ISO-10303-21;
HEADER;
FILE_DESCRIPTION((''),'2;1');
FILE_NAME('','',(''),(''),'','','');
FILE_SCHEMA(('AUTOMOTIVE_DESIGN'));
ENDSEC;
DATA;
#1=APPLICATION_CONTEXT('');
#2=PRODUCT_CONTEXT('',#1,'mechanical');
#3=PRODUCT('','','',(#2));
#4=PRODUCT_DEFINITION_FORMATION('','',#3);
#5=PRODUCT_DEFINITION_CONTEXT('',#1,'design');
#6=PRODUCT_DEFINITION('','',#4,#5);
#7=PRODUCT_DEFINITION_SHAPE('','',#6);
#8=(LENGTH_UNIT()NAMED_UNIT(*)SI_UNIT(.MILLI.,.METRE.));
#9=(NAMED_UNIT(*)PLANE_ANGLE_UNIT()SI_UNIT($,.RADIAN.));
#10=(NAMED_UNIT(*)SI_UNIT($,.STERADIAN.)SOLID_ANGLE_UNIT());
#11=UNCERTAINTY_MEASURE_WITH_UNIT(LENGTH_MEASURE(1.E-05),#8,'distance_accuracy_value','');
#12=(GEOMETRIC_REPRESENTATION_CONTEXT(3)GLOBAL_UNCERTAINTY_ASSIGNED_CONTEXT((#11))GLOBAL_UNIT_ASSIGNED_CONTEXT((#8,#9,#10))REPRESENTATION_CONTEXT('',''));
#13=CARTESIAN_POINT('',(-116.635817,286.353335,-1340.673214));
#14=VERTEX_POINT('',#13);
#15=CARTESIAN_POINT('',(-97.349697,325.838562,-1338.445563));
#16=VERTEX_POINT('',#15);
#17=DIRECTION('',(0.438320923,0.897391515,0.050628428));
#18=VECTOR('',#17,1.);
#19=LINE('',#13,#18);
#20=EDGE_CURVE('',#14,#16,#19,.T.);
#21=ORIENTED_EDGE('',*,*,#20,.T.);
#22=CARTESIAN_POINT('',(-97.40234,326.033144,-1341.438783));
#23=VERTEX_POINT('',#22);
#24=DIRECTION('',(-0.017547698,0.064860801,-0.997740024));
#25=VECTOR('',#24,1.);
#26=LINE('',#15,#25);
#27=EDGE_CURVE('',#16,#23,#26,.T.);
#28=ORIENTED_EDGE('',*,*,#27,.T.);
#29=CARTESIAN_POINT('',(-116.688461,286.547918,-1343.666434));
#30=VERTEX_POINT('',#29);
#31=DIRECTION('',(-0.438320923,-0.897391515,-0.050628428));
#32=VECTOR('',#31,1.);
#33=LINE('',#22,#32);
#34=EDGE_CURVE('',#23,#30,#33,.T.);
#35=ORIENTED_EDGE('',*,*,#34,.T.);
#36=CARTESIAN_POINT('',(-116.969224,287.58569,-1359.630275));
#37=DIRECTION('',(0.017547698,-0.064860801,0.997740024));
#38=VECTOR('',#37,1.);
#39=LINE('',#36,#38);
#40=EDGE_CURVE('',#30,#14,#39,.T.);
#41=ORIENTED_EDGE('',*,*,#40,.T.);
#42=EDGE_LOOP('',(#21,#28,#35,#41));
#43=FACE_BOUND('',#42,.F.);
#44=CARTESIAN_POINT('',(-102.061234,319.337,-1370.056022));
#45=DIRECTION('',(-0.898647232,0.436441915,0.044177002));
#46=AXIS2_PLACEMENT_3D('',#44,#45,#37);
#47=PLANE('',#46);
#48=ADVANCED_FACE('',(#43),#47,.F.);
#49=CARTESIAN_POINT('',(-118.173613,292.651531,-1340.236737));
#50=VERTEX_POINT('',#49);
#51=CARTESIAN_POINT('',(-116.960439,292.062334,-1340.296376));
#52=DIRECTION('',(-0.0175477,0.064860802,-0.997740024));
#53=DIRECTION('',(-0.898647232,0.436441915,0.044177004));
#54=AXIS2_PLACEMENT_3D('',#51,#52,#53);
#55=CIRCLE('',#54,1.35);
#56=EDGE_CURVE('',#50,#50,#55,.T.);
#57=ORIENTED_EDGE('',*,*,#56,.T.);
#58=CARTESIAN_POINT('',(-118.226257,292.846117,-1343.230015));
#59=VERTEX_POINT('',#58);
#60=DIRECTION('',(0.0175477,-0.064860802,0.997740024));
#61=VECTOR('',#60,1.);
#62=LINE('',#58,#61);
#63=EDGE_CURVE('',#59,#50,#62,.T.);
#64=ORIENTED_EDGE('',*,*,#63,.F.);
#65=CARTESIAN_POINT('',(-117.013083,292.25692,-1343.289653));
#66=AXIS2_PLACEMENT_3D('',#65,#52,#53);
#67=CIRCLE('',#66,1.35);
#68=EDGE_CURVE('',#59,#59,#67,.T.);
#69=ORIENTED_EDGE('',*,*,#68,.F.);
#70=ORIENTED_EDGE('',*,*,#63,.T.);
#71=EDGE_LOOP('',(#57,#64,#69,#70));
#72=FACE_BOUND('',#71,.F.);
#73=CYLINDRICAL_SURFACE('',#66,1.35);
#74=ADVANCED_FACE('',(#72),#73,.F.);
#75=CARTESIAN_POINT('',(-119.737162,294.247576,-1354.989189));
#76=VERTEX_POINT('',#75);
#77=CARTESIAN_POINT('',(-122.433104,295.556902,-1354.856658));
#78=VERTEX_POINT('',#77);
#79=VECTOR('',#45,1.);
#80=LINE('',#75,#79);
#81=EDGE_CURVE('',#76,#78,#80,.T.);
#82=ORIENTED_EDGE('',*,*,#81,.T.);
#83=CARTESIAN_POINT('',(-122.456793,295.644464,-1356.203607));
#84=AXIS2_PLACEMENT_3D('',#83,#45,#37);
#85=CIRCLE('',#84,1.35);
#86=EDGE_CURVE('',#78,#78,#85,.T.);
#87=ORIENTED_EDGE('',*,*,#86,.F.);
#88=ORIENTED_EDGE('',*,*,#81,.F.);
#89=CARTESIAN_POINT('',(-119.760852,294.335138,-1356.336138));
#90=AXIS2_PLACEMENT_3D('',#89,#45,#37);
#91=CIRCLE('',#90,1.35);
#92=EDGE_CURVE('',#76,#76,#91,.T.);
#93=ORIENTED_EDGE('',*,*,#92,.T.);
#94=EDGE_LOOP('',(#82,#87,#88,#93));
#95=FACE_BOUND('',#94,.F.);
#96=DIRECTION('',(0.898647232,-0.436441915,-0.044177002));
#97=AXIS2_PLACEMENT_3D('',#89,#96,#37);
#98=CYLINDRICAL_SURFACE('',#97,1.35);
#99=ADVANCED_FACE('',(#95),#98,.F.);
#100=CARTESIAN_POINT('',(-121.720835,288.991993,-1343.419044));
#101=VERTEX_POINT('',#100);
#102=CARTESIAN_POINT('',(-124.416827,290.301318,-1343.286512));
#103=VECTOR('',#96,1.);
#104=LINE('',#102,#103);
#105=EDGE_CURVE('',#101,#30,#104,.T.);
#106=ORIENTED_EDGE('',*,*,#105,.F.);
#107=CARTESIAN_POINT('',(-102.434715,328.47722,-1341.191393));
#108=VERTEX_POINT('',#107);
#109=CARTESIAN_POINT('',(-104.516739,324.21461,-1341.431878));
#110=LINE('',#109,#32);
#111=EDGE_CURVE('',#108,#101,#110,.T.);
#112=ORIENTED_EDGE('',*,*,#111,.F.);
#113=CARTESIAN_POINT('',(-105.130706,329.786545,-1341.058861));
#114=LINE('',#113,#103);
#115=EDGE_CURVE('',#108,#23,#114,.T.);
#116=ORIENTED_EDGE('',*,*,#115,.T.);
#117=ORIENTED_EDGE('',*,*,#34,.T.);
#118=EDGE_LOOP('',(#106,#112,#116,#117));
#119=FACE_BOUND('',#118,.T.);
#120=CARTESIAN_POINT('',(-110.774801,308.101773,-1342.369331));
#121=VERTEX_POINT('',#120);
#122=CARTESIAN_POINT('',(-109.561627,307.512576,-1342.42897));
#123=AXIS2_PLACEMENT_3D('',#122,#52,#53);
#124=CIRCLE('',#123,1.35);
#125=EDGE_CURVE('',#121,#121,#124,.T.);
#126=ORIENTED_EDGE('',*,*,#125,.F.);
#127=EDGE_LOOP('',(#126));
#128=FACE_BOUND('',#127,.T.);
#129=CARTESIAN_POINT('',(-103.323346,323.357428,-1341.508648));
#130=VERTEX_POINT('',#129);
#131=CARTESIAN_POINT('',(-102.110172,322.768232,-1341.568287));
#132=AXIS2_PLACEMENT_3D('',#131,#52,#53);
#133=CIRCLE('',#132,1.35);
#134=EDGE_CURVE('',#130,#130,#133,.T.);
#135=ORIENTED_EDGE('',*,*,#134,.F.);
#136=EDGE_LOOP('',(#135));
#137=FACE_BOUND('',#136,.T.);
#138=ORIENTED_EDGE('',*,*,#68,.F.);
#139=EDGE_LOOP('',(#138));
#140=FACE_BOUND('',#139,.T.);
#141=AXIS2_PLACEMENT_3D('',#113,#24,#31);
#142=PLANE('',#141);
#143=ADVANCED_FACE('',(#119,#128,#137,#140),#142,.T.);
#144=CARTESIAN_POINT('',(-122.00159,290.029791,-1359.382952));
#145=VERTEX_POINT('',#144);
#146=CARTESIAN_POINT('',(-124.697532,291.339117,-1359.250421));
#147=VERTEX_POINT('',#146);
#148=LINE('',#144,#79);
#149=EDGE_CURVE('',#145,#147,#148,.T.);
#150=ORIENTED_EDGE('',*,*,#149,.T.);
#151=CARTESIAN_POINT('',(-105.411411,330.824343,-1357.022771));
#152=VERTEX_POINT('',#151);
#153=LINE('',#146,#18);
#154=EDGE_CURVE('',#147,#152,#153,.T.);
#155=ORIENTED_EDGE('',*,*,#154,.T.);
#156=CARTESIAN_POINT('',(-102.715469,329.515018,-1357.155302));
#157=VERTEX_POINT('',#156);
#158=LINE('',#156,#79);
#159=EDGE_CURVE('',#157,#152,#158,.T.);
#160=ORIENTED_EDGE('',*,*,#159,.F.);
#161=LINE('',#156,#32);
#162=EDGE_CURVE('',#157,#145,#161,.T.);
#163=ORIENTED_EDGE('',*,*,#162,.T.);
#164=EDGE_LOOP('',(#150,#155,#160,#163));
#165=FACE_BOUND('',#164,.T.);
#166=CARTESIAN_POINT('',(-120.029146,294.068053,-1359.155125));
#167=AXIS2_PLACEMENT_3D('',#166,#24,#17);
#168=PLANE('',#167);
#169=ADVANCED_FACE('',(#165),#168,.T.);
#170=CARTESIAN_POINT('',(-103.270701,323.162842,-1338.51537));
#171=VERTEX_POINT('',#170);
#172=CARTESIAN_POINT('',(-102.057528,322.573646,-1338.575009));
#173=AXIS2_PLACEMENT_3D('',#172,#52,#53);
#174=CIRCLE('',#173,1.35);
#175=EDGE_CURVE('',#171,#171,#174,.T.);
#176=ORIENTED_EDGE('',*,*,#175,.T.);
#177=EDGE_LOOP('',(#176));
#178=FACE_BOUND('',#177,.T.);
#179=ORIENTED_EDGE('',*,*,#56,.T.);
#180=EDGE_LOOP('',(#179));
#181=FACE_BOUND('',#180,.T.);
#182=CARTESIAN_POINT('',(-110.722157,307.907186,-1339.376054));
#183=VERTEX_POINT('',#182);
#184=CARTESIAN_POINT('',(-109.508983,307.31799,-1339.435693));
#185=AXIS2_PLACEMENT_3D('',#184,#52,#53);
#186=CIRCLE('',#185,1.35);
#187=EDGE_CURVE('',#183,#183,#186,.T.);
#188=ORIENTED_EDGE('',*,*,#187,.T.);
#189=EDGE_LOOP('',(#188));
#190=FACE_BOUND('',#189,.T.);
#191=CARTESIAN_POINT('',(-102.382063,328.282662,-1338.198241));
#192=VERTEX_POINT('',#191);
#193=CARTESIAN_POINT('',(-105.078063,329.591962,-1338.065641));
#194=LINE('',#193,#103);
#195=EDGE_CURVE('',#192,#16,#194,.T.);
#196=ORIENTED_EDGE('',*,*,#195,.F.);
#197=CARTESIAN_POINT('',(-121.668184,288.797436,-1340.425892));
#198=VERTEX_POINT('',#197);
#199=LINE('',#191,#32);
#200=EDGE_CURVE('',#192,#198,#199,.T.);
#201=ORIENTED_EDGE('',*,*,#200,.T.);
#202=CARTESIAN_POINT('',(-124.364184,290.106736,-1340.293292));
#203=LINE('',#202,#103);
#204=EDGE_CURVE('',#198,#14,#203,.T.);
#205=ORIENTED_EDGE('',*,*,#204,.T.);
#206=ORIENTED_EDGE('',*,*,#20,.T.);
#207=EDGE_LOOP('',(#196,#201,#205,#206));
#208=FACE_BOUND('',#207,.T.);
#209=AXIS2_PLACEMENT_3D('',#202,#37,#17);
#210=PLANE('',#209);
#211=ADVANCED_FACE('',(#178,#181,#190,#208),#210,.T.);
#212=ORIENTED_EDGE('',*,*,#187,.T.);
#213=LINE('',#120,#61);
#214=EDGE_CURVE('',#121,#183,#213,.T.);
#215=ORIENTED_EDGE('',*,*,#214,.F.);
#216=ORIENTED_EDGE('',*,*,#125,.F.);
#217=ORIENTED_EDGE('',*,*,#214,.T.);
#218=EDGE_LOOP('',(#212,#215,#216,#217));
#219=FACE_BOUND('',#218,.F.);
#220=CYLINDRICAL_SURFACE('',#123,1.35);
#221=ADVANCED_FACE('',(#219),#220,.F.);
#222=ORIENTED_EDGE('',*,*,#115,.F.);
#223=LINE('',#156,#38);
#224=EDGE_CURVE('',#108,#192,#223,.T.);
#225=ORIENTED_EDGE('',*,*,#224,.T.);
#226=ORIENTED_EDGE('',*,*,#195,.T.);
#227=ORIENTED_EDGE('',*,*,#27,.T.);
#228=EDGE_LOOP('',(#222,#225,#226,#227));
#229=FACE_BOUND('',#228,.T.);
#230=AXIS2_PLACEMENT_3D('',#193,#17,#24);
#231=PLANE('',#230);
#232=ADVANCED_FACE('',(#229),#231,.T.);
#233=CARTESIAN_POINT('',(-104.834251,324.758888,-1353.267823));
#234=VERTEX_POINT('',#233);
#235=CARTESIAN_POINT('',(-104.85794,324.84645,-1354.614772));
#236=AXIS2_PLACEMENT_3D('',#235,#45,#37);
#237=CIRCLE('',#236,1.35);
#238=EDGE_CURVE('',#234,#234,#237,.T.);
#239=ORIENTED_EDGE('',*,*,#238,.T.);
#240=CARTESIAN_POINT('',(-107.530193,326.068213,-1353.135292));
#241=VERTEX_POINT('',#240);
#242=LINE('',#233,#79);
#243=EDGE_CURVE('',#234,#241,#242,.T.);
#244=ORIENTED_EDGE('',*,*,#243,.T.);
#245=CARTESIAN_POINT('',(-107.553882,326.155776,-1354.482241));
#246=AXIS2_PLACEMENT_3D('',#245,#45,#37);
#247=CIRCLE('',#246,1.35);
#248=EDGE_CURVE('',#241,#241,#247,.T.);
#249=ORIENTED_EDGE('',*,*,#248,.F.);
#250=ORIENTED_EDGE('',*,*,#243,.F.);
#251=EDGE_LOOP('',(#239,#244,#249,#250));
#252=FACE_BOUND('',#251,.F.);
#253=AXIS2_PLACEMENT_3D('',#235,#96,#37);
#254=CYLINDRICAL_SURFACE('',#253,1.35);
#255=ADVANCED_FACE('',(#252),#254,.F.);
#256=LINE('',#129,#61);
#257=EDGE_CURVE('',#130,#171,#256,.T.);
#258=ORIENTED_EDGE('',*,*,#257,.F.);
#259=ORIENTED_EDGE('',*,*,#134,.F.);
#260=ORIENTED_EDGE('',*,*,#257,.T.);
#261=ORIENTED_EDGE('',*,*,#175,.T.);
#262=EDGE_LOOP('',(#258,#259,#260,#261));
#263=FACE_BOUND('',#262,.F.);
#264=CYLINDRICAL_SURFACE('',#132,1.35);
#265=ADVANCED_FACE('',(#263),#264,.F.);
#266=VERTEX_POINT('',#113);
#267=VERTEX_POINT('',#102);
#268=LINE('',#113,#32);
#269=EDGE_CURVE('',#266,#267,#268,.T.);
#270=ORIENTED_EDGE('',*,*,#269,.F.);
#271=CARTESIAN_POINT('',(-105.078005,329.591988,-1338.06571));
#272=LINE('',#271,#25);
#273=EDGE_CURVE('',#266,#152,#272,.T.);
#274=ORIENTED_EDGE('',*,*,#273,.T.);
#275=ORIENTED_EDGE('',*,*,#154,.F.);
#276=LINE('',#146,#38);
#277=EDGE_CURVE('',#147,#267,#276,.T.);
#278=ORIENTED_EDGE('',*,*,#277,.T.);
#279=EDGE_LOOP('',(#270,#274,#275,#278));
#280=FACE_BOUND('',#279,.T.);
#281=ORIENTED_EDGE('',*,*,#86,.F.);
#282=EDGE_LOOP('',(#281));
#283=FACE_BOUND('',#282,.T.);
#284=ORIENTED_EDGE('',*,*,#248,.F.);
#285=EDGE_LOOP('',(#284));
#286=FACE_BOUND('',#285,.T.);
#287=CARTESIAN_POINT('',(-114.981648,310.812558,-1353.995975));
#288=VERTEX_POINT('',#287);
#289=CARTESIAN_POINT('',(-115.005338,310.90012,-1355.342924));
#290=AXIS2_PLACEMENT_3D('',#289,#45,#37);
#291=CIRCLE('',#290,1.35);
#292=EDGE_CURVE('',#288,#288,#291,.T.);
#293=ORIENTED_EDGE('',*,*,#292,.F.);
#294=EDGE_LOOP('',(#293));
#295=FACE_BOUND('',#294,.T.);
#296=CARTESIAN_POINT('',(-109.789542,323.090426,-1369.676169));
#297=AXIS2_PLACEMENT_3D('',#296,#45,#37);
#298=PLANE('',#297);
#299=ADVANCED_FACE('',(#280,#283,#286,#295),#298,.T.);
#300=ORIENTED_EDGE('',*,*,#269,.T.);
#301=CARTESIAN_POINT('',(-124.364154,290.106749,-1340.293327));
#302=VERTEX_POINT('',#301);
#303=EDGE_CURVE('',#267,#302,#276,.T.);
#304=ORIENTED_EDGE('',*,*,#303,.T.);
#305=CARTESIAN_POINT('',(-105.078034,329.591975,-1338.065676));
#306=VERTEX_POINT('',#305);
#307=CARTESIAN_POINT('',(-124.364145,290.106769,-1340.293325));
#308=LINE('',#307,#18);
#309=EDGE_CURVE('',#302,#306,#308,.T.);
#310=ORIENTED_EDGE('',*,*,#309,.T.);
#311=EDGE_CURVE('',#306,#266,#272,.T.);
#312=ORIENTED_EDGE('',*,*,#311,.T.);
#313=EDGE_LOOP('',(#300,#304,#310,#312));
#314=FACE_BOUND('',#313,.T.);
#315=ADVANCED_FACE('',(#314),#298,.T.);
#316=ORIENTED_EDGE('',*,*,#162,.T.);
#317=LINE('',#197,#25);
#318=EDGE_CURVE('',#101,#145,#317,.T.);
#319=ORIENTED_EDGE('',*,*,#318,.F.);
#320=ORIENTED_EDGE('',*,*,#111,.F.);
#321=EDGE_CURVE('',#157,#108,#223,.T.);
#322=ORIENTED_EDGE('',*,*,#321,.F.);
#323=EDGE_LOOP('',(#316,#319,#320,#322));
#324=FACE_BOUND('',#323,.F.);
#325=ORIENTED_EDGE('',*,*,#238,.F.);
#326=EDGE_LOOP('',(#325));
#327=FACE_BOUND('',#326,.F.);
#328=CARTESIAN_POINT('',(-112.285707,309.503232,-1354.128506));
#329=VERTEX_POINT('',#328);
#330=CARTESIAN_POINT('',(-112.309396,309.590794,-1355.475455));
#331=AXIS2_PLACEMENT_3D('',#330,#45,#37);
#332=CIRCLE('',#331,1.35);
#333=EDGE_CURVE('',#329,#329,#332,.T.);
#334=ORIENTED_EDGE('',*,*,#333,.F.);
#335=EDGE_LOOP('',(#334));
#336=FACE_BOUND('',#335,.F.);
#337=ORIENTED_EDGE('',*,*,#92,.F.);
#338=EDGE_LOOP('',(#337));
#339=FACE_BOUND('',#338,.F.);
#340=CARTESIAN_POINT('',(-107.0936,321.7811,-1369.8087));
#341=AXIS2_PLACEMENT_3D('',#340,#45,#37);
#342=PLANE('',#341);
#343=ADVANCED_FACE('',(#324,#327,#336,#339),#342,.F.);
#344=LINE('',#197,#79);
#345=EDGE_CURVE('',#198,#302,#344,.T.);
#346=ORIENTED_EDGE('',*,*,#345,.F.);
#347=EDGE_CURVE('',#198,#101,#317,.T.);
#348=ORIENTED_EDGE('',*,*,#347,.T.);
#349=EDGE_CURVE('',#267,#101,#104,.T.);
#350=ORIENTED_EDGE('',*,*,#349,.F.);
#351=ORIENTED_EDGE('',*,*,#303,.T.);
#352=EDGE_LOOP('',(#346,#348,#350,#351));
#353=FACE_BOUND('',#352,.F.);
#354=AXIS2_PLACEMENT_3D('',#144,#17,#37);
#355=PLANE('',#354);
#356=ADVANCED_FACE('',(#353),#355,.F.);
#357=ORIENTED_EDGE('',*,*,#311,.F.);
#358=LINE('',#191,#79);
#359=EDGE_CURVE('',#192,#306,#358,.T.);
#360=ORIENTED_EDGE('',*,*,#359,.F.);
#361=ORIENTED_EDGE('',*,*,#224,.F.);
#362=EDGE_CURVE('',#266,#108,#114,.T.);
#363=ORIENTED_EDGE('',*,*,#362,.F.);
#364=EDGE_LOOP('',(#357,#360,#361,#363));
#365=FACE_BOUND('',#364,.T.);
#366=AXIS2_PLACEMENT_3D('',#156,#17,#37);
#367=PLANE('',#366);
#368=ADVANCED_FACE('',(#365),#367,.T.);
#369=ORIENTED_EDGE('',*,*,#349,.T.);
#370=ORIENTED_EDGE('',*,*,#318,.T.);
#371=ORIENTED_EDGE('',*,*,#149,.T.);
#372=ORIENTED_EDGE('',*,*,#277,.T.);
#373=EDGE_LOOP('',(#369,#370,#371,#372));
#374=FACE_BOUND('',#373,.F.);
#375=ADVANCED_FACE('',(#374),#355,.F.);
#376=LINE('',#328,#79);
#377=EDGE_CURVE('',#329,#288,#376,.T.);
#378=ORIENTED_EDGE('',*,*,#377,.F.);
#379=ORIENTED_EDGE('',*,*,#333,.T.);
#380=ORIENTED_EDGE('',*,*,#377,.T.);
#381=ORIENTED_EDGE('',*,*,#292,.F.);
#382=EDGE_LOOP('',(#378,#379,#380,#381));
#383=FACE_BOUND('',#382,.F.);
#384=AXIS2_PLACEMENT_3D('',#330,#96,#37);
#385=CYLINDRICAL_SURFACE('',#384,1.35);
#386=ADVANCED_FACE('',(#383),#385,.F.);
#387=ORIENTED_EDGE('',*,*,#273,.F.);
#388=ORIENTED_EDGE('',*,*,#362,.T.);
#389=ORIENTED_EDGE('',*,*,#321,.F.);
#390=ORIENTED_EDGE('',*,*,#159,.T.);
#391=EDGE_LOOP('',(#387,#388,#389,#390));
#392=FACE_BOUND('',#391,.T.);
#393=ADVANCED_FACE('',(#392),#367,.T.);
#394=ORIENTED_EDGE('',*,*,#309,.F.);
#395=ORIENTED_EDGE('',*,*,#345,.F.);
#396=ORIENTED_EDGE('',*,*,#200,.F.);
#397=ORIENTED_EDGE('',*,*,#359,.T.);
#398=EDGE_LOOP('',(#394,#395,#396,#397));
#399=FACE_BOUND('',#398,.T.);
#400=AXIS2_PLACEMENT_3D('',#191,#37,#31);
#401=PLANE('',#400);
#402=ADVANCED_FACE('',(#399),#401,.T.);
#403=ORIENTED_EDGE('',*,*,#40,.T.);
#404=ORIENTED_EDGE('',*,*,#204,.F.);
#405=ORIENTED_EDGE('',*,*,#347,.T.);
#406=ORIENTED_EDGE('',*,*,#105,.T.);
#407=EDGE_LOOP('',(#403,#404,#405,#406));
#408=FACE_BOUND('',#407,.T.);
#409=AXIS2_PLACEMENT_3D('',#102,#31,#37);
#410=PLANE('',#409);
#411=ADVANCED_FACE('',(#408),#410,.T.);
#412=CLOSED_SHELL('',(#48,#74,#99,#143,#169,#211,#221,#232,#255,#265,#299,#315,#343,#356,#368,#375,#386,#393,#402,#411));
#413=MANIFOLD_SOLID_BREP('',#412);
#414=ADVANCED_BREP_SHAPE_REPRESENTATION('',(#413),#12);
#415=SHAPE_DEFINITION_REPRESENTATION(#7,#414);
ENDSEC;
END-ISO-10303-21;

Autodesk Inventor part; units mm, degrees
ref_plane "YZ Plane" through (0, 0, 0) normal (1, 0, 0) x (0, 1, 0)
ref_plane "Work Plane1" through (-107.0936, 321.7811, -1369.8087) normal (-0.8986472, 0.4364419, 0.044177) x (0.0175477, -0.0648608, 0.99774)
sketch "Sketch2" plane through (-107.0936, 321.7811, -1369.8087) normal (-0.8986472, 0.4364419, 0.044177) x (0.0175477, -0.0648608, 0.99774)
  circle A0 centre (15, 4.5) radius 1.35 projected
  circle A1 centre (15, -12.5) radius 1.35 projected
  circle A2 centre (15, -29.5) radius 1.35 projected
  line L0 (17.8, -32.6) -> (17.8, 6) projected
  line L1 (12.2, -30) -> (12.2, 9) projected
  line L2 (12.2, -34.5) -> (12.2, 9.5)
  circle A3 centre (15, 4.5) radius 1.35
  circle A4 centre (15, -12.5) radius 1.35
  circle A5 centre (15, -29.5) radius 1.35
  line L3 (12.2, 9.5) -> (31.2, 9.5)
  line L4 (12.2, -34.5) -> (31.2, -34.5)
  line L5 (31.2, 6) -> (31.2, -32.6) projected
  line L6 (31.2, -32.6) -> (35.7, -32.6) projected
  line L7 (35.7, -31.975) -> (35.7, -32.6) projected
  line L8 (33.7, -31.975) -> (35.7, -31.975) projected
  line L9 (33.7, -27.025) -> (33.7, -31.975) projected
  line L10 (35.7, -27.025) -> (33.7, -27.025) projected
  line L11 (35.7, -25.525) -> (35.7, -27.025) projected
  line L12 (33.2, -25.525) -> (35.7, -25.525) projected
  line L13 (33.2, -16.475) -> (33.2, -25.525) projected
  line L14 (35.7, -16.475) -> (33.2, -16.475) projected
  line L15 (35.7, -14.975) -> (35.7, -16.475) projected
  line L16 (33.7, -14.975) -> (35.7, -14.975) projected
  line L17 (33.7, -10.025) -> (33.7, -14.975) projected
  line L18 (35.7, -10.025) -> (33.7, -10.025) projected
  line L19 (35.7, -8.525) -> (35.7, -10.025) projected
  line L20 (33.2, -8.525) -> (35.7, -8.525) projected
  line L21 (33.2, 0.525) -> (33.2, -8.525) projected
  line L22 (35.7, 0.525) -> (33.2, 0.525) projected
  line L23 (35.7, 2.025) -> (35.7, 0.525) projected
  line L24 (33.7, 2.025) -> (35.7, 2.025) projected
  line L25 (33.7, 6) -> (33.7, 2.025) projected
  line L26 (33.7, 6) -> (31.2, 6) projected
  line L27 (31.2, 9.5) -> (31.2, -34.5)
  line L28 (28.2, 9.5) -> (28.2, -34.5)
  dimension "d1" = 2.7
  dimension "d2" = 2.7
  dimension "d3" = 2.7
  dimension "d6" = 5
  dimension "d8" = 5
  dimension "d13" = 3
extrude "Extrusion2" add sketch "Sketch2" along normal blind 3 contours L1 L2 L3 L28 L4 | L28 L3 L27 L5 L4
sketch "Sketch3" plane through (-107.0936, 321.7811, -1369.8087) normal (0.8986472, -0.4364419, -0.044177) x (-0.0175477, 0.0648608, -0.99774)
  circle A0 centre (-15, 4.5) radius 1.35 projected
  circle A1 centre (-15, -29.5) radius 1.35 projected
  circle A2 centre (-15, -12.5) radius 1.35 projected
  line L0 (-31.2, -34.5) -> (-31.2, 9.5) projected
  line L1 (-12.2, -34.5) -> (-31.2, -34.5) projected
  line L2 (-12.2, 9.5) -> (-12.2, -34.5) projected
  line L3 (-31.2, 9.5) -> (-12.2, 9.5) projected
  point P0 (-1389.4632, -172.471)
sketch "Sketch4" plane through (-109.7896, 323.0904, -1369.6761) normal (-0.8986472, 0.4364419, 0.044177) x (0.0175477, -0.0648608, 0.99774)
  line L0 (12.2, -34.5) -> (31.2, -34.5) projected
  line L1 (31.2, 9.5) -> (28.2, 9.5)
  line L2 (28.2, 9.5) -> (28.2, -34.5)
  line L3 (28.2, -34.5) -> (31.2, -34.5)
  line L4 (31.2, -34.5) -> (31.2, 9.5)
  dimension "d16" = 3
ref_plane "Work Plane2" through (-113.4024, 293.0987, -1341.5395) normal (-0.8986472, 0.4364419, 0.044177) x (0.0175477, -0.0648608, 0.99774)
extrude "Extrusion3" add sketch "Sketch4" against normal up to surface (8.6 mm away)
sketch "Sketch5" plane through (-121.7209, 288.992, -1343.4191) normal (-0.0175477, 0.0648608, -0.99774) x (-0.8986472, 0.4364419, 0.044177)
  circle A0 centre (-2.8, 39) radius 1.35 projected
  circle A1 centre (-2.8, 22) radius 1.35 projected
  circle A2 centre (-2.8, 5) radius 1.35 projected
  circle A3 centre (-2.8, 5) radius 1.35
  circle A4 centre (-2.8, 22) radius 1.35
  circle A5 centre (-2.8, 39) radius 1.35
  point P0 (-176.1642, -137.971)
  dimension "d19" = 2.7
  dimension "d20" = 2.7
  dimension "d21" = 2.7
extrude "Extrusion4" cut sketch "Sketch5" against normal through all
properties part number "Trapezium" material "Aluminum-6061"
